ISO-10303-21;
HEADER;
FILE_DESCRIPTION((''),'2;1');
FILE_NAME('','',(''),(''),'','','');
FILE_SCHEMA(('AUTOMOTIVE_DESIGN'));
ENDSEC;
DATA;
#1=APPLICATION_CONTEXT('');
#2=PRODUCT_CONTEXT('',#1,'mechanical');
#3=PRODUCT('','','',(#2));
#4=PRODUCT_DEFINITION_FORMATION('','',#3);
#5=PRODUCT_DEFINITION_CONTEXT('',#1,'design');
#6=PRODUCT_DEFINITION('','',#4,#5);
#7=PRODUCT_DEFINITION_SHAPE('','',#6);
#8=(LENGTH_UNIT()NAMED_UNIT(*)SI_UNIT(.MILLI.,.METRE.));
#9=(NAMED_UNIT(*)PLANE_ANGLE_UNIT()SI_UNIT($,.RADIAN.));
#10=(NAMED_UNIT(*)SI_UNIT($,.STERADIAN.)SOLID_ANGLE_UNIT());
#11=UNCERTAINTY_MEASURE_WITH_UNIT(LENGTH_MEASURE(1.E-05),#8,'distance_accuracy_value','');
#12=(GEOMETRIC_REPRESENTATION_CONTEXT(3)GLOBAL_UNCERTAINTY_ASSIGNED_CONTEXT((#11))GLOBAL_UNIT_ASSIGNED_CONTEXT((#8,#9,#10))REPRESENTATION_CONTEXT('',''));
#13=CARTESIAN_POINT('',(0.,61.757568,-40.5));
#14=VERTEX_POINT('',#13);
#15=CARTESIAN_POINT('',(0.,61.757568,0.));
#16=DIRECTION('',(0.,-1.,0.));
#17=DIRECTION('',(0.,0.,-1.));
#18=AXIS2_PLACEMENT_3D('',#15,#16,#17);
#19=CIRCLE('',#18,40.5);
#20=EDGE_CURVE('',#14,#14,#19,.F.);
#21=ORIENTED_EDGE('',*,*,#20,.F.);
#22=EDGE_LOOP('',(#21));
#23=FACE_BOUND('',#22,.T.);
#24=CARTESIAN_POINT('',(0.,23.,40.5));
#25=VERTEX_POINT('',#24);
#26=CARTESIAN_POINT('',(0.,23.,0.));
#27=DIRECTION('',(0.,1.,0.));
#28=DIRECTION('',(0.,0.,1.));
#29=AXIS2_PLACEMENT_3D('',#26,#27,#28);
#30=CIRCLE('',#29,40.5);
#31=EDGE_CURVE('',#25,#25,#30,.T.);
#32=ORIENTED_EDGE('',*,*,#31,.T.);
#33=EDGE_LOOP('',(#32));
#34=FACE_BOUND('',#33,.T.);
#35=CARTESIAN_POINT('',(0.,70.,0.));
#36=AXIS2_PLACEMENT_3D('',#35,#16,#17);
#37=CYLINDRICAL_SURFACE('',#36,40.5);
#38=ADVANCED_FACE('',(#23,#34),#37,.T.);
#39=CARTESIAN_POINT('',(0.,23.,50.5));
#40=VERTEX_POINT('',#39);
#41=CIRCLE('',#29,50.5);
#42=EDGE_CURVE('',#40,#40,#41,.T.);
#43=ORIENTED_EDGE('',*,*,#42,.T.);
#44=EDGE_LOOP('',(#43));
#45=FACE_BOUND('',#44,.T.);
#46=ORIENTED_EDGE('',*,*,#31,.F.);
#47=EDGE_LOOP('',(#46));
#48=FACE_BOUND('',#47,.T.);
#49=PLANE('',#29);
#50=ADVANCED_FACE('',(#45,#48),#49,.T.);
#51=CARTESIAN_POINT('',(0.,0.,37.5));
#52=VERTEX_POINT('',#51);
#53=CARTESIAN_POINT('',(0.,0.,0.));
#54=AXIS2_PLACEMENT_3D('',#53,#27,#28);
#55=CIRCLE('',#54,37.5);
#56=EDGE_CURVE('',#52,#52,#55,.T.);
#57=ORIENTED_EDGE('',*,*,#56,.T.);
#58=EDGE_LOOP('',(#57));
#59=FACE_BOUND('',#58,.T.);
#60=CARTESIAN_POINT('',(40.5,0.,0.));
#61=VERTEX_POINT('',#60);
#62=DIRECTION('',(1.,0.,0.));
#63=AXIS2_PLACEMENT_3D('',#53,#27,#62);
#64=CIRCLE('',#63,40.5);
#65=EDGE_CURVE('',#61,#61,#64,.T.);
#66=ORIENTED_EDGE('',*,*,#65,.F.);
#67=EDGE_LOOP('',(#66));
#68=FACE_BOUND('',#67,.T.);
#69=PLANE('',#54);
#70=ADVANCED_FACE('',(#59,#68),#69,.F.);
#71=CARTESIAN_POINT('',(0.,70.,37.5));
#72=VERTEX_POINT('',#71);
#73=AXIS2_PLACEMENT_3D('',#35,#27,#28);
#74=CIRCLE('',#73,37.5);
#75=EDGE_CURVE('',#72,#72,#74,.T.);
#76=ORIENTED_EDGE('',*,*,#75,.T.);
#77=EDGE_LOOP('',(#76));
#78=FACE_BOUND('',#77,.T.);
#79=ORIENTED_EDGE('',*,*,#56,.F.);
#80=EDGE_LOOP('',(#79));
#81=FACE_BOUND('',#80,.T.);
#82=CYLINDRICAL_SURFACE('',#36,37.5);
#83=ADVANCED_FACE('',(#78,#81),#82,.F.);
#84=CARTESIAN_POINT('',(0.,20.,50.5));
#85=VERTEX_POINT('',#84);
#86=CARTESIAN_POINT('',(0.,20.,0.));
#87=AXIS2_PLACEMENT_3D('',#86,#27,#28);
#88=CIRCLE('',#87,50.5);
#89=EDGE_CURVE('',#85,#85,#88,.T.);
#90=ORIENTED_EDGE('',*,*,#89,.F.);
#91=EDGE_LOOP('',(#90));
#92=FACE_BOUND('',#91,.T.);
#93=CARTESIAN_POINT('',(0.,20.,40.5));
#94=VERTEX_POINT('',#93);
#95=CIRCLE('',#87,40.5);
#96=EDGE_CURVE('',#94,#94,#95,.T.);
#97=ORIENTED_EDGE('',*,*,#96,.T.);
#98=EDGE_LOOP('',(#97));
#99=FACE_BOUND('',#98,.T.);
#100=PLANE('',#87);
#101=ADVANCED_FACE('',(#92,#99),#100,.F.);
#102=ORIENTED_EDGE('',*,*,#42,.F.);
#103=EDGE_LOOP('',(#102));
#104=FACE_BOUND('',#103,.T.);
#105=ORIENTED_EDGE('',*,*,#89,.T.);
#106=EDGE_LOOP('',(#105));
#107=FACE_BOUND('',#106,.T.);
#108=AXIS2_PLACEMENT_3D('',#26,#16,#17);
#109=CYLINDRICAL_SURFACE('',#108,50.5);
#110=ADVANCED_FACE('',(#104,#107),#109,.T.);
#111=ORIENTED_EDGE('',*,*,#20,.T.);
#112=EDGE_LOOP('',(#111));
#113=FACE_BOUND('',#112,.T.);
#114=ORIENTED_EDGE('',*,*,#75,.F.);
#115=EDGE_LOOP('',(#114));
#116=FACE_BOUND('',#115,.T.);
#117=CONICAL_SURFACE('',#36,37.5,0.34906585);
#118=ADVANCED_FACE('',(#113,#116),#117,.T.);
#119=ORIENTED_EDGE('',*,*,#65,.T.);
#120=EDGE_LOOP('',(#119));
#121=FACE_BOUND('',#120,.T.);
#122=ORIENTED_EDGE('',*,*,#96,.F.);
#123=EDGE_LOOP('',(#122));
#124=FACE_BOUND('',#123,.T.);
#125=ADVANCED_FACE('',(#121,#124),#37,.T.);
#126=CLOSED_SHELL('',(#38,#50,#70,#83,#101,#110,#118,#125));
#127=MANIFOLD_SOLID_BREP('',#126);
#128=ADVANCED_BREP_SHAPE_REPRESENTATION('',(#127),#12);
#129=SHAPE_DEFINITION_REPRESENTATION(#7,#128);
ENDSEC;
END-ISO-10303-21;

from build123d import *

# Parameters (mm, degrees)
SKETCH_1_R        = 40.5
SKETCH_1_R_2      = 37.5
EXTRUDE_1_DEPTH   = 70
SKETCH_3_R        = 50.5
SKETCH_3_R_2      = 40.5
EXTRUDE_1_2_DEPTH = 3


# Read off the part's stored shape, not the designer's step: Вырез-Повернуть-Тонкостенный1
with BuildPart() as part:
    # Эскиз1 → Extrude 1 (new body)
    with BuildSketch(Plane(origin=(0, 0, 0), x_dir=(1, 0, 0), z_dir=(0, 1, 0))):
        Circle(SKETCH_1_R)
        Circle(SKETCH_1_R_2, mode=Mode.SUBTRACT)
    extrude(amount=EXTRUDE_1_DEPTH)

    # Вырез-Повернуть-Тонкостенный1 outline → Вырез-Повернуть-Тонкостенный1 (revolve, cut)
    with BuildSketch(Plane.XY):
        Polygon((40.5, 70), (37.5, 70), (40.5, 61.757567742), align=None)
    revolve(axis=Axis((0, 0, 0), (0, 1, 0)), mode=Mode.SUBTRACT)

    # Эскиз3 → Extrude 1 2 (add)
    with BuildSketch(Plane(origin=(0, 20, 0), x_dir=(1, 0, 0), z_dir=(0, 1, 0))):
        with Locations(Location((0, 0, 0), (0, 0, 270))):
            Circle(SKETCH_3_R)
        Circle(SKETCH_3_R_2, mode=Mode.SUBTRACT)
    extrude(amount=EXTRUDE_1_2_DEPTH)


solid = part.part
